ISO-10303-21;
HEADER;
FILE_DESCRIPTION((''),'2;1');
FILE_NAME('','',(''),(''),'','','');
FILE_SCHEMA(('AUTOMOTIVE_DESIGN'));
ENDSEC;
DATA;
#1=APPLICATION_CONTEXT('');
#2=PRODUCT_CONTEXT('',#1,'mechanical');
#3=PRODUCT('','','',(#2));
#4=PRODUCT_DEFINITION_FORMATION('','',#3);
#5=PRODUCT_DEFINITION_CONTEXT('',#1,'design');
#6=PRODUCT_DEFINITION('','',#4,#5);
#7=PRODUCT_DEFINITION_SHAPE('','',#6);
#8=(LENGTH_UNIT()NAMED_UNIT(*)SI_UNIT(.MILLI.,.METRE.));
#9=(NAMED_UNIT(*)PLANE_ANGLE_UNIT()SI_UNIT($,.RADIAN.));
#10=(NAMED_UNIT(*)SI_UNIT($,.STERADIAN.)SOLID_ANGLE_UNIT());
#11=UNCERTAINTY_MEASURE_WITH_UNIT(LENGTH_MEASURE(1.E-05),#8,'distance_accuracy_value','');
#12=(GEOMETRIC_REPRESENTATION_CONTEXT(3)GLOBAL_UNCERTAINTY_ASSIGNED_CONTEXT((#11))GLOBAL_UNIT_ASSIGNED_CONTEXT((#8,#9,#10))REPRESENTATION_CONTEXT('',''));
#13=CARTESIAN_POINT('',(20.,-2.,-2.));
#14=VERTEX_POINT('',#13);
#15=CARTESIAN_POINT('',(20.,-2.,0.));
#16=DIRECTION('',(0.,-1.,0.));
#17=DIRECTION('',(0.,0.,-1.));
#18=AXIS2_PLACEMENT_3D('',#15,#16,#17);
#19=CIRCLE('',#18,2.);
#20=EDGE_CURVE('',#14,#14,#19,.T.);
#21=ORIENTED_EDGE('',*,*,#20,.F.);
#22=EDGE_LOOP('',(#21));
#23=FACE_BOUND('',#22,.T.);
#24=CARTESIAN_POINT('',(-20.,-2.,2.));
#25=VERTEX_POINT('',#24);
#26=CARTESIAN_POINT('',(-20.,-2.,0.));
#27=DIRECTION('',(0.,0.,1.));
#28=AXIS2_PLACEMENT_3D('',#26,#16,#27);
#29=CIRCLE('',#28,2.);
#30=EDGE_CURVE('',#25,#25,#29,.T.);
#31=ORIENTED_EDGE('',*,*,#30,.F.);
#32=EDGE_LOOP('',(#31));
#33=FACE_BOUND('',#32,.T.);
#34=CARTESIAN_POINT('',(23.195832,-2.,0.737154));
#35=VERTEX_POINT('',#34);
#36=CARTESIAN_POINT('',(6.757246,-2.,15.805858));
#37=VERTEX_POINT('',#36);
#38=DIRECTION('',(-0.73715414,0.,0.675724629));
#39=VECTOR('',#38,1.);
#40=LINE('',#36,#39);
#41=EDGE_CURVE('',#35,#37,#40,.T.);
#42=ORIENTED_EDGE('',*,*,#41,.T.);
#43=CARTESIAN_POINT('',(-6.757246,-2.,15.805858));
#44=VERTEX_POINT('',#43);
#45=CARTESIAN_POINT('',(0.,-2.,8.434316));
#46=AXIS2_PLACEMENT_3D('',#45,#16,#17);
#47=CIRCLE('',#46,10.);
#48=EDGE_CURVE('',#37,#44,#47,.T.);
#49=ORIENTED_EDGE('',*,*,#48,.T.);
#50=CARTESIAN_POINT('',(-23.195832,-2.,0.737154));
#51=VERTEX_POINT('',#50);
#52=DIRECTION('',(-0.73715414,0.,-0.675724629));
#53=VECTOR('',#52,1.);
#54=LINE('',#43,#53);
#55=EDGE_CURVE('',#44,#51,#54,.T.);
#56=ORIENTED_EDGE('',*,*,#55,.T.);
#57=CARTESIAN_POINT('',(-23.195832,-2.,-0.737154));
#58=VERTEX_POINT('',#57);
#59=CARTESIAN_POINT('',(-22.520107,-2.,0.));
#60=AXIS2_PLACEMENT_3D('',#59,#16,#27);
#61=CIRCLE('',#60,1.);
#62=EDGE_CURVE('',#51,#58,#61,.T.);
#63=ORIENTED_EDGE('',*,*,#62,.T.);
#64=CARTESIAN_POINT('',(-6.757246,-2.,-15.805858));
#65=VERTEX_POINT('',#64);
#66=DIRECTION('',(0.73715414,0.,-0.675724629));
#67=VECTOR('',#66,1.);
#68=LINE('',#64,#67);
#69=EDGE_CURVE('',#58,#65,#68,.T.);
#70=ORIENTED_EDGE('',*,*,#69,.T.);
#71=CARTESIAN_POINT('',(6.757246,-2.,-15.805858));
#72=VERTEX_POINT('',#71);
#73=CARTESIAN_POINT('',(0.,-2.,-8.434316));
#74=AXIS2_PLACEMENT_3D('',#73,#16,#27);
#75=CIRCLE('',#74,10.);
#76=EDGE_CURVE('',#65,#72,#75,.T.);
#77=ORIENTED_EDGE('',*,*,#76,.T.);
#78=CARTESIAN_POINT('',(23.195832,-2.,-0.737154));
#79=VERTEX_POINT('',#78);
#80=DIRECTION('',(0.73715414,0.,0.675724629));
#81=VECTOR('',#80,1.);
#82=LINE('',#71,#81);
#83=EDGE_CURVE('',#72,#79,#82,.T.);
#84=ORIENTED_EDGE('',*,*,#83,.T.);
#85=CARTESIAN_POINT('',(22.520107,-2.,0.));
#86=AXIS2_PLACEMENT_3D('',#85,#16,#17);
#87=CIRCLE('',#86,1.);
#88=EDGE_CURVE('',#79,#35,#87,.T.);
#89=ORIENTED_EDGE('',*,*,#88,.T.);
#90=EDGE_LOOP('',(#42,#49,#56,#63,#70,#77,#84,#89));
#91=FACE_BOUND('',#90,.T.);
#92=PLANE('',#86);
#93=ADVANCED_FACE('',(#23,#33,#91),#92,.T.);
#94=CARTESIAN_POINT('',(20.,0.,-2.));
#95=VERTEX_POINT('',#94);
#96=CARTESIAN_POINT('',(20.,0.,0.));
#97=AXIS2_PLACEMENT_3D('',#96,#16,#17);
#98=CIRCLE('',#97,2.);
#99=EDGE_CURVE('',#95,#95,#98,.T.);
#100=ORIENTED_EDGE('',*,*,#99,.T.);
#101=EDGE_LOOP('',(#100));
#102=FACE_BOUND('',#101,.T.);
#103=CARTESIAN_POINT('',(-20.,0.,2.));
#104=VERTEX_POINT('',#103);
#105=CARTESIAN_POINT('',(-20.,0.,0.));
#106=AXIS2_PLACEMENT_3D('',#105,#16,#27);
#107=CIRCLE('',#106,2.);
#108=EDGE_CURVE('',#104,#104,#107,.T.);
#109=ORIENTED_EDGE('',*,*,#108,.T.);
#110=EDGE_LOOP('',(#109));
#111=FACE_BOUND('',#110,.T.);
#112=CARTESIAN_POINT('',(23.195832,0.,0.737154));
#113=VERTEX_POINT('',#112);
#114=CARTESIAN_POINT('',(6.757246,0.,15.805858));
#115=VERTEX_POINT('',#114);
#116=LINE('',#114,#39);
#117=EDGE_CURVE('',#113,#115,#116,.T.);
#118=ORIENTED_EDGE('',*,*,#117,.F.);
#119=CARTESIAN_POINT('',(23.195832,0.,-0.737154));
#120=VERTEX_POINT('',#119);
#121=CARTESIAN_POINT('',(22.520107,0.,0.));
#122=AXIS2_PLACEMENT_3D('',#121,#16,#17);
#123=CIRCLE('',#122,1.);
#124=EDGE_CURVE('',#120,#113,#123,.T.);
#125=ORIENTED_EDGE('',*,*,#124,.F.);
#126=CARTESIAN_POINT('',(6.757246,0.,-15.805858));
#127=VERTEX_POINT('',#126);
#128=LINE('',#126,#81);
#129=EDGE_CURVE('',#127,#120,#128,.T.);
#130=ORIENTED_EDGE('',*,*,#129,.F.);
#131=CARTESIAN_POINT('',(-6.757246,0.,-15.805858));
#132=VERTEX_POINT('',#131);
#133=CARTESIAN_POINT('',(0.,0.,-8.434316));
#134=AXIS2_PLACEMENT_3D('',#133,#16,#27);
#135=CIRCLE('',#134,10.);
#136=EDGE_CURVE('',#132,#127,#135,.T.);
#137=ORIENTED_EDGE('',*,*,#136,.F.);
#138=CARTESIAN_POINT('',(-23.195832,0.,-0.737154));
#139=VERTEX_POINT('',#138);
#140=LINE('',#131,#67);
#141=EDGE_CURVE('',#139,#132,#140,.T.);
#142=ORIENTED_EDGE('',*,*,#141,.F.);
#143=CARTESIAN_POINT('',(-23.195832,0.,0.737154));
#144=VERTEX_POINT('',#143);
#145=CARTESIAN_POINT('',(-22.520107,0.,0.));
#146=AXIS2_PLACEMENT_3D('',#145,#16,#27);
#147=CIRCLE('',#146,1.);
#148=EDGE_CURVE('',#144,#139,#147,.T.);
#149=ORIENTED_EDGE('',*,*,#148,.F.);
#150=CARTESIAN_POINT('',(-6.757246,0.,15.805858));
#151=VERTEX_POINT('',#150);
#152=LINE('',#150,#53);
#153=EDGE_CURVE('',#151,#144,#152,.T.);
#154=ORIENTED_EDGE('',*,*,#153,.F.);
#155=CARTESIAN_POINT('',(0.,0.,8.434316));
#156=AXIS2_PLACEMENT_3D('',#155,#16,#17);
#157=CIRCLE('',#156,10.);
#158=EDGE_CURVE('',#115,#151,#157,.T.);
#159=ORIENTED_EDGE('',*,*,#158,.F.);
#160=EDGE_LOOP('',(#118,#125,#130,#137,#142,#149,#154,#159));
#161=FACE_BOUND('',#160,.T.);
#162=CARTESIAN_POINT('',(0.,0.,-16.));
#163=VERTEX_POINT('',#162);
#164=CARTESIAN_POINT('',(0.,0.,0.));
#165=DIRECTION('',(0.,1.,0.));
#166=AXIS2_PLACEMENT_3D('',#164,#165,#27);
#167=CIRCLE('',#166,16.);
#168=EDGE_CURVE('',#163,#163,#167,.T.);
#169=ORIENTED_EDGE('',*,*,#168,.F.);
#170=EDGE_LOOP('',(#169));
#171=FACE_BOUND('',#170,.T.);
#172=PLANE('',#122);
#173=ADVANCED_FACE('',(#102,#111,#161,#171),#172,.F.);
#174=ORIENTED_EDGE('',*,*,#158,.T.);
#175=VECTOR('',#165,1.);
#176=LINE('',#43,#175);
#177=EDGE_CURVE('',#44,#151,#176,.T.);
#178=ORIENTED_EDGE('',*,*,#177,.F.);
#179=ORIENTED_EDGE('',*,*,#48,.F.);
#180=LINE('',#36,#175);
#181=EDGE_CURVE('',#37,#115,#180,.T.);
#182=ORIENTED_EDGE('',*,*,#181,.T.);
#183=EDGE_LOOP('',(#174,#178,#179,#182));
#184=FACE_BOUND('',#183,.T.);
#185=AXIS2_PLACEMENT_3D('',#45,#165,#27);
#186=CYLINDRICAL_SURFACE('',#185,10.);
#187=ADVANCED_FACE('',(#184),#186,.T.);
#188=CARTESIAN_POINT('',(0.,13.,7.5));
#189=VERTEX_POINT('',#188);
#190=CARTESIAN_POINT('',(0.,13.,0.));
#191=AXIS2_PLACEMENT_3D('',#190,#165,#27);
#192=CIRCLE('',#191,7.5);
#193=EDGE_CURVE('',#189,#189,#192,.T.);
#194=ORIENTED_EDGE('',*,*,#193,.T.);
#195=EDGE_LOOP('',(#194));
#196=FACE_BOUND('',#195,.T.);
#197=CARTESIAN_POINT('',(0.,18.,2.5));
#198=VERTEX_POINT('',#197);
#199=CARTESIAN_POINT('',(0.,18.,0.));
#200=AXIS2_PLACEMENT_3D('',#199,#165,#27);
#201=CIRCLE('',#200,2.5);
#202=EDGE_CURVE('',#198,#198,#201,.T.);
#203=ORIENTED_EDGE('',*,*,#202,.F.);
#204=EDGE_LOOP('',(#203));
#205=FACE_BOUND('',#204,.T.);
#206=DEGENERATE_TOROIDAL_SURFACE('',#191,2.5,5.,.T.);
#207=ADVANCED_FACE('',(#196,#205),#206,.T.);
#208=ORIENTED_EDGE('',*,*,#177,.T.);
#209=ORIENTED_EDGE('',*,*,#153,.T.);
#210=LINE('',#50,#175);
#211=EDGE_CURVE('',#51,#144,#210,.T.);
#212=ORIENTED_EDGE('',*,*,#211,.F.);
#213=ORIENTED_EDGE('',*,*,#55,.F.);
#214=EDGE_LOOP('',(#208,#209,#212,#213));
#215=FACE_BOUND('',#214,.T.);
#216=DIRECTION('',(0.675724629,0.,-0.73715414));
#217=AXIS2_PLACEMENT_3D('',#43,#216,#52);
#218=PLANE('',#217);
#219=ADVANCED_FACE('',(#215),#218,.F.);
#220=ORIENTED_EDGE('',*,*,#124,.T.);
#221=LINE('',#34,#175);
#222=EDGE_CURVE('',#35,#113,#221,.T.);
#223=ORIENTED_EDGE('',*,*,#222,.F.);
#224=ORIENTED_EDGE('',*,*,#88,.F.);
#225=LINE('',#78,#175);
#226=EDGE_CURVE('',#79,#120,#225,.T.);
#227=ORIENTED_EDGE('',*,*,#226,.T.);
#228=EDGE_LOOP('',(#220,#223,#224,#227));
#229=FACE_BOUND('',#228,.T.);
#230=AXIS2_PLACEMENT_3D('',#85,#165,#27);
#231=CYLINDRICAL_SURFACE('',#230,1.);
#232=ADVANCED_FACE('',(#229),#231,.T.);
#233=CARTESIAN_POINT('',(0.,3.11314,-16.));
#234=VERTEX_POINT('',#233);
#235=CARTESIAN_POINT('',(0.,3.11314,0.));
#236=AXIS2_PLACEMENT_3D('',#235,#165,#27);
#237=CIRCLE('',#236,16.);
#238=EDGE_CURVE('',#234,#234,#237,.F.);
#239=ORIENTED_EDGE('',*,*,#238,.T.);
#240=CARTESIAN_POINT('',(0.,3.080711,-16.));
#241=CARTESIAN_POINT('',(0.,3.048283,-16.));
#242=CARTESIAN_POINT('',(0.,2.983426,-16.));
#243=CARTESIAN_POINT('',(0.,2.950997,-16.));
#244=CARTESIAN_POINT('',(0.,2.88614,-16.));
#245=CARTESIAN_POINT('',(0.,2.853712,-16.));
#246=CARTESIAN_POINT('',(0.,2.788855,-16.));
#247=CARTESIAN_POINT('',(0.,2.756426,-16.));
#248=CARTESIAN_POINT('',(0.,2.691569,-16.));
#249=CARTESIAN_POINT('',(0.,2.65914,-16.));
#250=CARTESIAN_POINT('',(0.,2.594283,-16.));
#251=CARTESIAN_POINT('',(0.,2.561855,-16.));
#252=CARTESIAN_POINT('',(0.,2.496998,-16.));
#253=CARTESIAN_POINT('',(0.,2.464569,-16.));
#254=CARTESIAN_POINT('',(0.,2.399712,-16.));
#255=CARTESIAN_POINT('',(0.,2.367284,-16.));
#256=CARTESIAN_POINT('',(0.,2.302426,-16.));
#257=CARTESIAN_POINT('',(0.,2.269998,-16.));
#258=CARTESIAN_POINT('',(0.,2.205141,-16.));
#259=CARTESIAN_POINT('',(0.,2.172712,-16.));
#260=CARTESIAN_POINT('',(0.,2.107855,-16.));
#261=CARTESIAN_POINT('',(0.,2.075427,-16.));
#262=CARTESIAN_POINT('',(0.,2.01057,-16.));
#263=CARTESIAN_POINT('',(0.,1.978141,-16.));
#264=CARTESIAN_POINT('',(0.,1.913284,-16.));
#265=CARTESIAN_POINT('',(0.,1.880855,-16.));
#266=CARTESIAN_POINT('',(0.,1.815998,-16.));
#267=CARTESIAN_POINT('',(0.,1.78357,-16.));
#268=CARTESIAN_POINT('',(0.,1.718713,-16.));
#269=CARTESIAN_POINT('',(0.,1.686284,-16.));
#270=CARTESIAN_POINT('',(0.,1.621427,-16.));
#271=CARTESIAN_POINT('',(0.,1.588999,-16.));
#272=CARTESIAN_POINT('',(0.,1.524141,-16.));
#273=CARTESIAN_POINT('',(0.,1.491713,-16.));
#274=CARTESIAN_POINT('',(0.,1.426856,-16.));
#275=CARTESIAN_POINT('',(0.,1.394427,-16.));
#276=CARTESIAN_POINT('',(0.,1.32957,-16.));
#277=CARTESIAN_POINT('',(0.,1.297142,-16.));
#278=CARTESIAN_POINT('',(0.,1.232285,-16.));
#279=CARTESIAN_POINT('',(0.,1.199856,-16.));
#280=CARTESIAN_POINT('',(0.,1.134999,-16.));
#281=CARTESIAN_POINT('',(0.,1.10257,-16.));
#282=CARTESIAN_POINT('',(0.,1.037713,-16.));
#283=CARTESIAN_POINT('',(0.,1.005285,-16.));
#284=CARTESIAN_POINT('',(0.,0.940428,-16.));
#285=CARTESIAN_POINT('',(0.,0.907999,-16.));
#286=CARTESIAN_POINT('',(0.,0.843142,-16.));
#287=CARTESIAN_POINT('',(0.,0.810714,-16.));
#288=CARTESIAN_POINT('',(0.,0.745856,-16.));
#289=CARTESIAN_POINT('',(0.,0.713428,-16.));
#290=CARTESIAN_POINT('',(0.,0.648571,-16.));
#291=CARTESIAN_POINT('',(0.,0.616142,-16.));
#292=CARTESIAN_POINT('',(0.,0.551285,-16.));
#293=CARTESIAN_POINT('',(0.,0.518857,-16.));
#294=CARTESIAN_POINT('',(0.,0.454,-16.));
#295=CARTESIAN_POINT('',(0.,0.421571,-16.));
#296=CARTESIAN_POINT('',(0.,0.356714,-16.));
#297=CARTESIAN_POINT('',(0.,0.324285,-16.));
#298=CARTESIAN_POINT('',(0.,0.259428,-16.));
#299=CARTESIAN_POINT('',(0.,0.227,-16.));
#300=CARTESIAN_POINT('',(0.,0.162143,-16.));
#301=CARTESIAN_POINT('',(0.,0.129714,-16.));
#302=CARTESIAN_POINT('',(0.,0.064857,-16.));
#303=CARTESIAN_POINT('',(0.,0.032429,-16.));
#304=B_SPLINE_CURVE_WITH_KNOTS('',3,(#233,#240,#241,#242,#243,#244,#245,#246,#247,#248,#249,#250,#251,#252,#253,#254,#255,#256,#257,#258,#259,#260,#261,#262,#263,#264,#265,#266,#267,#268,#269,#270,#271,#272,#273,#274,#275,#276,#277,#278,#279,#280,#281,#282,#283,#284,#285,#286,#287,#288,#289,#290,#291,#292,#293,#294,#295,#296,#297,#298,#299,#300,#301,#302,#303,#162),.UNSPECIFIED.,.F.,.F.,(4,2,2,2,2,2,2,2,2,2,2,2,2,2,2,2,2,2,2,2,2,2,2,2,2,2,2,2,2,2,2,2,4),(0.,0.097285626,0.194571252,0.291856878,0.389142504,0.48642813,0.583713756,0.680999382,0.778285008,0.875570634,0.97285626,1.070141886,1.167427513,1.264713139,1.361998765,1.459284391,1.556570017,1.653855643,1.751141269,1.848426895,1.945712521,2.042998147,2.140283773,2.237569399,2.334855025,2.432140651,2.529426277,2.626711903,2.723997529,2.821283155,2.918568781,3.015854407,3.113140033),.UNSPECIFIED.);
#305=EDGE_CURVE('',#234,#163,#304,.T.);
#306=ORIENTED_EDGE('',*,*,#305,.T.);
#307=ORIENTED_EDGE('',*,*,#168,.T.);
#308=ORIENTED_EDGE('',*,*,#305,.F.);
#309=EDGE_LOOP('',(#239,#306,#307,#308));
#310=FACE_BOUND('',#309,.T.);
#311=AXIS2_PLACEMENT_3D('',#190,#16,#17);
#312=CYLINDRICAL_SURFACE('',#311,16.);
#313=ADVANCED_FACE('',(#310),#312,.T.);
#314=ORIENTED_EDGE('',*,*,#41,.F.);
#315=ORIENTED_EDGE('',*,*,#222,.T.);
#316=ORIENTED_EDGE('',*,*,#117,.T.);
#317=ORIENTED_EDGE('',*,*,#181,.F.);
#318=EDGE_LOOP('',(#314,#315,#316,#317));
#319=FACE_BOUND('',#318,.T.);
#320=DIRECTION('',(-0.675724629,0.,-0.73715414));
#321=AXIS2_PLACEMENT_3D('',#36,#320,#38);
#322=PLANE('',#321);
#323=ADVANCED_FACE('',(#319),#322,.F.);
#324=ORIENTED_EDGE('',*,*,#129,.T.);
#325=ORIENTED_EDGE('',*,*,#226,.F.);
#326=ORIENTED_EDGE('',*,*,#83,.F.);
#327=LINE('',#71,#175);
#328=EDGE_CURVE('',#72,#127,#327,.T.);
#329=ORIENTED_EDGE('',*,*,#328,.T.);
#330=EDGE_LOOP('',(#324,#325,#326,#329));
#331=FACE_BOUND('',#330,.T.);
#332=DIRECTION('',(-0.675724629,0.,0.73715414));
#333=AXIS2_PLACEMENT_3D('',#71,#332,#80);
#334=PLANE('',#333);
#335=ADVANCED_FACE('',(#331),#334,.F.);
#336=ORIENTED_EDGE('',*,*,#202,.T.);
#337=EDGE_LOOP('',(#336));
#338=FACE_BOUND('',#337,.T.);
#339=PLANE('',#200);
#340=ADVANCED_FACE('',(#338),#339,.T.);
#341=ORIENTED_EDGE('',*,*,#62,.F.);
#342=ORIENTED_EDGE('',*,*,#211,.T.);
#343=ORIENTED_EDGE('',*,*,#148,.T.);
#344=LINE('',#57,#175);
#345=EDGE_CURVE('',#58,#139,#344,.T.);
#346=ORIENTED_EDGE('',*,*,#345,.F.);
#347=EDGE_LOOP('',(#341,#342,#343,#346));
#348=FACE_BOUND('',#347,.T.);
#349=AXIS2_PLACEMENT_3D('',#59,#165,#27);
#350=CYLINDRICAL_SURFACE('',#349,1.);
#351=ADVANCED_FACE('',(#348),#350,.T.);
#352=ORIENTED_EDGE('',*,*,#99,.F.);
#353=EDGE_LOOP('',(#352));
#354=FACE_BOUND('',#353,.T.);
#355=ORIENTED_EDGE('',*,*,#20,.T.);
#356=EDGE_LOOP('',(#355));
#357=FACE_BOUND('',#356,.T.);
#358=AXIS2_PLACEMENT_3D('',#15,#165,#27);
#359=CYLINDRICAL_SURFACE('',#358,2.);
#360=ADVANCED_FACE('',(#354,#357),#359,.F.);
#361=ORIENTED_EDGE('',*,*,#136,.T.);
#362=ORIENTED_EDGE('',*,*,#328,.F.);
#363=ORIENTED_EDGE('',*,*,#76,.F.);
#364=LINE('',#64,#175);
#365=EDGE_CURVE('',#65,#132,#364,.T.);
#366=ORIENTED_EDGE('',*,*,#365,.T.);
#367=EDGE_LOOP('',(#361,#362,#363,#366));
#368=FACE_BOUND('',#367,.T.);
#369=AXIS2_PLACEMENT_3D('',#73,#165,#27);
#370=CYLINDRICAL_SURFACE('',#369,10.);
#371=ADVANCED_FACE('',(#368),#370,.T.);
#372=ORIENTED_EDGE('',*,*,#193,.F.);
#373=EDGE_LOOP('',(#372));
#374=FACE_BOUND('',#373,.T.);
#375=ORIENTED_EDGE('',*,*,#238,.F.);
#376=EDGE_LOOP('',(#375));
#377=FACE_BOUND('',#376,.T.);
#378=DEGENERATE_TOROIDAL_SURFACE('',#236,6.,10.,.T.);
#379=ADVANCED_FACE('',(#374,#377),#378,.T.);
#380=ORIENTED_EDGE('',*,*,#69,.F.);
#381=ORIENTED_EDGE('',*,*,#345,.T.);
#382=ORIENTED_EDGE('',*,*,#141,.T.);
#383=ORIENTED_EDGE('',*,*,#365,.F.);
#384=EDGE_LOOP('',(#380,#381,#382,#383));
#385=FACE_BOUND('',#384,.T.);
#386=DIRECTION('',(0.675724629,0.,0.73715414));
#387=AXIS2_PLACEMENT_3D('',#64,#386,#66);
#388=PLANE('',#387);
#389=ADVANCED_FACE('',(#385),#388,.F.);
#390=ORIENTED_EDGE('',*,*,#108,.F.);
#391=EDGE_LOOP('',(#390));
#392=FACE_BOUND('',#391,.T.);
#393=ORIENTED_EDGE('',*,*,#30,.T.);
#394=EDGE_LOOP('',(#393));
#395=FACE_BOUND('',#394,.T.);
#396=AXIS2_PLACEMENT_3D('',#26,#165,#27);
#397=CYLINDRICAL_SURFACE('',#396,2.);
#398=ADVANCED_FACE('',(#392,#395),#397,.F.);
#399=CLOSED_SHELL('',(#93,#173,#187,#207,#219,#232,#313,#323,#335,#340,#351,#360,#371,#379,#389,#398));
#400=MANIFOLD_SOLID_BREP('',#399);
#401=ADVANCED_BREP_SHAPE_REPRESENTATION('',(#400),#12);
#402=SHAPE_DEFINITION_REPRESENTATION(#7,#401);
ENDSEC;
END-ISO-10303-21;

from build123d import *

# Parameters (mm, degrees)
SKETCH1_R           = 16
BOSS_EXTRUDE1_DEPTH = 13
SKETCH2_R           = 7.5
BOSS_EXTRUDE2_DEPTH = 5
FILLET3_R           = 10
FILLET4_R           = 5
SKETCH3_R           = 2
BOSS_EXTRUDE3_DEPTH = 2


# Some blends are built 0.0001 mm under size
with BuildPart() as part:
    # Sketch1 → Boss-Extrude1 (new body)
    with BuildSketch(Plane(origin=(0, 0, 0), x_dir=(1, 0, 0), z_dir=(0, 1, 0))):
        with Locations(Location((0, 0, 0), (0, 0, 90))):
            Circle(SKETCH1_R)
    extrude(amount=BOSS_EXTRUDE1_DEPTH)

    # Sketch2 → Boss-Extrude2 (add)
    with BuildSketch(Plane(origin=(0, 13, 0), x_dir=(1, 0, 0), z_dir=(0, 1, 0))):
        with Locations(Location((0, 0, 0), (0, 0, 270))):
            Circle(SKETCH2_R)
    extrude(amount=BOSS_EXTRUDE2_DEPTH)

    # Fillet3
    # the kernel refuses this fillet: 10 mm, written as the material it takes off along each edge
    with BuildSketch(Plane(origin=(0, 13, 0), x_dir=(0, 0, -1), z_dir=(1, 0, 0))) as fillet3_piece_1:
        with BuildLine():
            CenterArc((6, -9.886859967), FILLET3_R, 0, 81.373073441)
            Line((7.5, 0), (7.53, 0.197737199))
            ThreePointArc((7.53, 0.197737199), (11.75, 0.2), (16, 0.2))
            Line((16, 0.2), (16.2, 0))
            Line((16.2, 0), (16.2, -9.886859967))
            Line((16.2, -9.886859967), (16, -9.886859967))
        make_face()
    revolve(axis=Axis((0, 13, 0), (0, 1, 0)), mode=Mode.SUBTRACT)

    # Fillet4
    fillet4_edges = [part.edges().sort_by_distance(p)[0] for p in [
        (0, 18, -7.5),
    ]]
    fillet(fillet4_edges, radius=FILLET4_R - 0.0001)  # a hair under: the kernel refuses the full size

    # Sketch3 → Boss-Extrude3 (add)
    with BuildSketch(Plane.XZ):
        with BuildLine():
            Line((6.757246285, 15.805857572), (23.195831847, 0.73715414))
            ThreePointArc((23.195831847, 0.73715414), (23.520107219, 0), (23.195831847, -0.73715414))
            Line((23.195831847, -0.73715414), (6.757246285, -15.805857572))
            ThreePointArc((6.757246285, -15.805857572), (0, -18.43431617), (-6.757246285, -15.805857572))
            Line((-6.757246285, -15.805857572), (-23.195831847, -0.73715414))
            ThreePointArc((-23.195831847, -0.73715414), (-23.520107219, 0), (-23.195831847, 0.73715414))
            Line((-23.195831847, 0.73715414), (-6.757246285, 15.805857572))
            ThreePointArc((-6.757246285, 15.805857572), (0, 18.43431617), (6.757246285, 15.805857572))
        make_face()
        with Locations(Location((20, 0, 0), (0, 0, 270))):
            Circle(SKETCH3_R, mode=Mode.SUBTRACT)
        with Locations(Location((-20, 0, 0), (0, 0, 90))):
            Circle(SKETCH3_R, mode=Mode.SUBTRACT)
    extrude(amount=BOSS_EXTRUDE3_DEPTH)


solid = part.part
